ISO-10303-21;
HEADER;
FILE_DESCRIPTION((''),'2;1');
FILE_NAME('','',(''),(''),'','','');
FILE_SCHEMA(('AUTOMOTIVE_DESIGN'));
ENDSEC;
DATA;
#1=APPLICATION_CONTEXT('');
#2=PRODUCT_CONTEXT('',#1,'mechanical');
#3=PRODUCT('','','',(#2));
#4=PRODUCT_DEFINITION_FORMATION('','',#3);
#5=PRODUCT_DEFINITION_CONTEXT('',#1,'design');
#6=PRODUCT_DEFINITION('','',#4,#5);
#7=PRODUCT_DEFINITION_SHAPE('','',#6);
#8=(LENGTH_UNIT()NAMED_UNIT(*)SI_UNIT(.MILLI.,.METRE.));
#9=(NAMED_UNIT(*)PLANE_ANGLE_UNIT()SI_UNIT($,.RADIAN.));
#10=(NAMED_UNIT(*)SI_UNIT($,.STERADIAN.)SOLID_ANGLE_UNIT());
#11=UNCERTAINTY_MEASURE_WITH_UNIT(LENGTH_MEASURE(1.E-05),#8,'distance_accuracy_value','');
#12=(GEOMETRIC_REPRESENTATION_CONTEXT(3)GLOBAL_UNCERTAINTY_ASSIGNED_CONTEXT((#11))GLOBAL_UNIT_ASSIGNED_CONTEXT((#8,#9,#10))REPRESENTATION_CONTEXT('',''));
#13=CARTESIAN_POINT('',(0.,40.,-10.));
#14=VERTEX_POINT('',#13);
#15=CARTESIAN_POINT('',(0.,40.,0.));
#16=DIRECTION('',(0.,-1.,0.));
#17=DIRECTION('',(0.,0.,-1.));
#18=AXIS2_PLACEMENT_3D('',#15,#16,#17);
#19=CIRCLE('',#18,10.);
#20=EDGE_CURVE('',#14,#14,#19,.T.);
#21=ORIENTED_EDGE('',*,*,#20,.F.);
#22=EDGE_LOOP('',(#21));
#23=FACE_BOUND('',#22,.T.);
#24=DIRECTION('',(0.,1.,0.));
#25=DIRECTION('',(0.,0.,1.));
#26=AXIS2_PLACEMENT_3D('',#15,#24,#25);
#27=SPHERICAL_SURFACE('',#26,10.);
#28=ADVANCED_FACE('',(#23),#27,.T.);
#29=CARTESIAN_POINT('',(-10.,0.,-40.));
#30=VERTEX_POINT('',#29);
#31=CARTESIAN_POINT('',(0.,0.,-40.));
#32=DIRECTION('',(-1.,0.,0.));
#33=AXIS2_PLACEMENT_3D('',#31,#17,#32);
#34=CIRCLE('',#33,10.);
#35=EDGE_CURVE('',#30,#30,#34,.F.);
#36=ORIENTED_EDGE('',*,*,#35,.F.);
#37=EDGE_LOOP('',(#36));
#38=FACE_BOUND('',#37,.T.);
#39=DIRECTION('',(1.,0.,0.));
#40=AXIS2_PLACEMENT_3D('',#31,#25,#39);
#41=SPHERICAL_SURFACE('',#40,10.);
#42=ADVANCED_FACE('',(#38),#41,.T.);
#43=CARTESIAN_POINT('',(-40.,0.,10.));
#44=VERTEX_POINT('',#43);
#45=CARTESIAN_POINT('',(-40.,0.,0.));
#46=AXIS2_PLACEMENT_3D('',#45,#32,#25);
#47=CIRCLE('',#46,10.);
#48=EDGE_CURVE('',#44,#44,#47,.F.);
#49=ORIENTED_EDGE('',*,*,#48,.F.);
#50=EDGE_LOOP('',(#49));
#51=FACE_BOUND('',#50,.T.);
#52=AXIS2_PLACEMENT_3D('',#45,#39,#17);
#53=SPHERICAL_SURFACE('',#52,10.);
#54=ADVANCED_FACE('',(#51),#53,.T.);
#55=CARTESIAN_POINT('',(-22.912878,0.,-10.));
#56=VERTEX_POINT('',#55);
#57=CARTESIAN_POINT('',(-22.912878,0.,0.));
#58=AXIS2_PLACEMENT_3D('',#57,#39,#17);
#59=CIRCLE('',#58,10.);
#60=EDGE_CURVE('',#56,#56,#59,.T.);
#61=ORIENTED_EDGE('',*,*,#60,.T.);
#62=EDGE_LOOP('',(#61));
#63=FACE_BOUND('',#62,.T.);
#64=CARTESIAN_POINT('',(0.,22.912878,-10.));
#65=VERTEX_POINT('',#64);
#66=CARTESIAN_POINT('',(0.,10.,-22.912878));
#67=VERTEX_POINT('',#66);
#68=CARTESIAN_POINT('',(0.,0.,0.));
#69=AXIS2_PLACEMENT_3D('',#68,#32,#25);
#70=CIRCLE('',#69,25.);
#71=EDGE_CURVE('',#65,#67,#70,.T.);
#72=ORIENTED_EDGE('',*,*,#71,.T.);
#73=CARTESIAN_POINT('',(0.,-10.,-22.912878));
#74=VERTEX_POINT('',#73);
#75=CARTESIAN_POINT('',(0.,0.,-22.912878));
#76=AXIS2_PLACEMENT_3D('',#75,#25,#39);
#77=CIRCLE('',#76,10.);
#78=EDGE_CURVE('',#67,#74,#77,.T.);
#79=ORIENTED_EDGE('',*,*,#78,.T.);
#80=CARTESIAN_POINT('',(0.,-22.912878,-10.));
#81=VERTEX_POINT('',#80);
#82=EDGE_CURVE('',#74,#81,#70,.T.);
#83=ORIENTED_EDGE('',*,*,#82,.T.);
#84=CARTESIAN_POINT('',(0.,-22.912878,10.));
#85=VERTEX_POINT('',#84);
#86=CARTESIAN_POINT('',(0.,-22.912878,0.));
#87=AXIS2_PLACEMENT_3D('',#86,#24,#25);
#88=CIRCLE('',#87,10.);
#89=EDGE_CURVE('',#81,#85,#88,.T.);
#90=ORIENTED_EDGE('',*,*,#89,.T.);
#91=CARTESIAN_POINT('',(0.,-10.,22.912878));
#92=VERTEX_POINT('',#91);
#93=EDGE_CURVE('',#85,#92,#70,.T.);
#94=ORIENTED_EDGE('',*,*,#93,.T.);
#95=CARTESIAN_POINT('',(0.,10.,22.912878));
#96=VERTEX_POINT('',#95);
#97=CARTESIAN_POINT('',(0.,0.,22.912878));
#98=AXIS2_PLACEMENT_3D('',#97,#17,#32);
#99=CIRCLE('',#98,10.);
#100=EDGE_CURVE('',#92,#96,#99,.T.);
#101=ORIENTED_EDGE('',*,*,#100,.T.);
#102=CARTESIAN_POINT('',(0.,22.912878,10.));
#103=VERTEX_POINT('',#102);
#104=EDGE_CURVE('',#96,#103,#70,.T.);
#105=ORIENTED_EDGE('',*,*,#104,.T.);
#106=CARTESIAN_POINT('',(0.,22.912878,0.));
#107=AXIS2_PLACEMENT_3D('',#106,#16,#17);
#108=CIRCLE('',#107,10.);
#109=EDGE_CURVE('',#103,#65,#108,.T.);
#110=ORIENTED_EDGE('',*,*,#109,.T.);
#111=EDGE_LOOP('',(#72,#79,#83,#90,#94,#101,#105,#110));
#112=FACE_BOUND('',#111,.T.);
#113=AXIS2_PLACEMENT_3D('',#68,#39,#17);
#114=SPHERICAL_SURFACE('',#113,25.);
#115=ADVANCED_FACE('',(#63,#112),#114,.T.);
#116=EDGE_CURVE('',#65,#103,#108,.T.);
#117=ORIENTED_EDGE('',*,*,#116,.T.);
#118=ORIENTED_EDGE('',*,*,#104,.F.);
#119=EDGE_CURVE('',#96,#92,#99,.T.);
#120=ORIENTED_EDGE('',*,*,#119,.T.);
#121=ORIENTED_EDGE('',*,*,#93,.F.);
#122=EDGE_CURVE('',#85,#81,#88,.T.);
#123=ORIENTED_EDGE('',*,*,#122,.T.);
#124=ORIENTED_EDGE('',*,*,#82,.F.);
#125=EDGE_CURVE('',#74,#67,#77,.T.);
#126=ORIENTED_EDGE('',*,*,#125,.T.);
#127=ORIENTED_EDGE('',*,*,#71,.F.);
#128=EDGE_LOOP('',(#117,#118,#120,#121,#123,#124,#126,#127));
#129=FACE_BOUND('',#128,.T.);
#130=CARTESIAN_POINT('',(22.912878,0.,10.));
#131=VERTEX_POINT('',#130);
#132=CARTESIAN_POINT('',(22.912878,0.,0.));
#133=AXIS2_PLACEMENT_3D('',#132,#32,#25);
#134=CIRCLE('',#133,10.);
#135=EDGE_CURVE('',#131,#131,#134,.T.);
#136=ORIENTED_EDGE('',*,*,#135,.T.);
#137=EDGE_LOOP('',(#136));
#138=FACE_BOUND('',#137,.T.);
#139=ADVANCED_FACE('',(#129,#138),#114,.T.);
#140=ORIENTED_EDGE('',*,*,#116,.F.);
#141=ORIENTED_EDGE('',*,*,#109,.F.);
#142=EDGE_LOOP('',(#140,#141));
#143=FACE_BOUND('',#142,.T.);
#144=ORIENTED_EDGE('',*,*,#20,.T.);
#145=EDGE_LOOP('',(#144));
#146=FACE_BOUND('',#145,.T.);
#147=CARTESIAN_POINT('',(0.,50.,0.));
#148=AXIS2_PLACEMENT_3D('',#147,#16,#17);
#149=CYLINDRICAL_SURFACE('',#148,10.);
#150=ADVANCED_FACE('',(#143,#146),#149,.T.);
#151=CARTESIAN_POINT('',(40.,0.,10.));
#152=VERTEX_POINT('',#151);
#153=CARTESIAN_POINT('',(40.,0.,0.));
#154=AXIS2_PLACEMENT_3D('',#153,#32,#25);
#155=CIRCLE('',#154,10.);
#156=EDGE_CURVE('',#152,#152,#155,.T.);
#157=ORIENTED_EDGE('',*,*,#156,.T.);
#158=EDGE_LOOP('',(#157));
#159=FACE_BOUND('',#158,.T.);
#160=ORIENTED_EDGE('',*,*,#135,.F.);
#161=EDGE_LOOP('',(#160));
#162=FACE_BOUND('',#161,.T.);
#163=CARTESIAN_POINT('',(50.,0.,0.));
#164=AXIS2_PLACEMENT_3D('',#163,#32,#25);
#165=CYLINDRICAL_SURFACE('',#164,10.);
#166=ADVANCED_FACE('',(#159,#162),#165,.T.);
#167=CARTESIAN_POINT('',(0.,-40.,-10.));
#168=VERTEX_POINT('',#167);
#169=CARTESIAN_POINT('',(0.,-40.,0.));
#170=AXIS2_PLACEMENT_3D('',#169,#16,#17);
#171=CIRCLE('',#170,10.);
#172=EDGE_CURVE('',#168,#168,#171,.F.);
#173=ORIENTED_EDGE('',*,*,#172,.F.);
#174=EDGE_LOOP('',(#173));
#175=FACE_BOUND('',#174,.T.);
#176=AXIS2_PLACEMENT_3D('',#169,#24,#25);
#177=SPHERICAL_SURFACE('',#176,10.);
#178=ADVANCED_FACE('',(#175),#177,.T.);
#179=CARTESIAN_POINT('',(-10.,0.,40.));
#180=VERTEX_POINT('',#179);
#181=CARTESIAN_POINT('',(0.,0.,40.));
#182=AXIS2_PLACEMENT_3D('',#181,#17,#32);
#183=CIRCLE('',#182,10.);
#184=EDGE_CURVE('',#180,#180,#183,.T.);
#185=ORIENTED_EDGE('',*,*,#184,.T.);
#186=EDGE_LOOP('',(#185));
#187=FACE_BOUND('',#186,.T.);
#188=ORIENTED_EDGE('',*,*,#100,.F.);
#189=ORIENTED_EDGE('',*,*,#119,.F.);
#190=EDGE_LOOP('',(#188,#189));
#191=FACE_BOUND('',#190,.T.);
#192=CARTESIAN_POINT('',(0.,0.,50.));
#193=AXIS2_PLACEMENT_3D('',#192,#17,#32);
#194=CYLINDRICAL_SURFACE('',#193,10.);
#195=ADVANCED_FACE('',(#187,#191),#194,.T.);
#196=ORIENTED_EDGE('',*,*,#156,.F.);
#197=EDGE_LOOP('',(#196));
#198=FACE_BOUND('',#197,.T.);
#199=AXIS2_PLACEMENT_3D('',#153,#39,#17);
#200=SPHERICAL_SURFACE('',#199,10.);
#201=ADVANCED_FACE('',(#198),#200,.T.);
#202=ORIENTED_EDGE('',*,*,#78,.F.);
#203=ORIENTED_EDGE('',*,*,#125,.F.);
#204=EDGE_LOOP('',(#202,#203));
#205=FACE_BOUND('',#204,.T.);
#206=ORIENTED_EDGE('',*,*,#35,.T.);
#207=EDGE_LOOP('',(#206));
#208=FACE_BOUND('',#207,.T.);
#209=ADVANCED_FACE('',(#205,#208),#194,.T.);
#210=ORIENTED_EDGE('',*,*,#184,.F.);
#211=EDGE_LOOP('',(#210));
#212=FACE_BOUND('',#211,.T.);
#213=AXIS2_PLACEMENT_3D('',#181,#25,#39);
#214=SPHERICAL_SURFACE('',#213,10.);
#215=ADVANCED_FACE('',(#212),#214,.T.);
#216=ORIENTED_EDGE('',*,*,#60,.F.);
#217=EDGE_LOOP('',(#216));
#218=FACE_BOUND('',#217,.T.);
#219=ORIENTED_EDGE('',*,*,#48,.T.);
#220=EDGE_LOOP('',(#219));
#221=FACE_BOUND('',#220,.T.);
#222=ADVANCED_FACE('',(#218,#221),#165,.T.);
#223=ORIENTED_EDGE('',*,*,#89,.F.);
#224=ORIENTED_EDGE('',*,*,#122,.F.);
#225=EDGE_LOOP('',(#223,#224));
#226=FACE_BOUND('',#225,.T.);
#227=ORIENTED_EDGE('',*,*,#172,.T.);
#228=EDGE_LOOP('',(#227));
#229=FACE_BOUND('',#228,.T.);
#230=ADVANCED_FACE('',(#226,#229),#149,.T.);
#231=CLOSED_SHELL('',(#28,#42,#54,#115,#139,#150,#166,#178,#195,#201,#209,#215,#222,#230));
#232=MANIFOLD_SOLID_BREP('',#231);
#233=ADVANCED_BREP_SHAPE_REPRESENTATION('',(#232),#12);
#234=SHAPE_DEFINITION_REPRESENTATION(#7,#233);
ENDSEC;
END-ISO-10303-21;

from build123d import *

# Parameters (mm, degrees)
SKETCH1_R           = 25
BOSS_EXTRUDE1_DEPTH = 25
FILLET1_R           = 25
SKETCH2_R           = 10
BOSS_EXTRUDE2_DEPTH = 50
FILLET2_R           = 10
SKETCH3_R           = 10
BOSS_EXTRUDE3_DEPTH = 50
FILLET3_R           = 10
SKETCH4_R           = 10
BOSS_EXTRUDE4_DEPTH = 50
FILLET4_R           = 10


with BuildPart() as part:
    # Sketch1 → Boss-Extrude1 (new, symmetric)
    with BuildSketch(Plane(origin=(0, 0, 0), x_dir=(0, 0, -1), z_dir=(1, 0, 0))):
        Circle(SKETCH1_R)
    extrude(amount=BOSS_EXTRUDE1_DEPTH, both=True)

    # Fillet1
    fillet1_edges = [part.edges().sort_by_distance(p)[0] for p in [
        (-25, 0, 25),
        (25, 0, 25),
    ]]
    fillet(fillet1_edges, radius=FILLET1_R - 0.0001)  # a hair under: the kernel refuses the full size

    # Sketch2 → Boss-Extrude2 (add, symmetric)
    with BuildSketch(Plane(origin=(0, 0, 0), x_dir=(0, 0, -1), z_dir=(1, 0, 0))):
        with Locations(Location((0, 0, 0), (0, 0, 180))):
            Circle(SKETCH2_R)
    extrude(amount=BOSS_EXTRUDE2_DEPTH, both=True)

    # Fillet2
    fillet2_edges = [part.edges().sort_by_distance(p)[0] for p in [
        (50, 0, -10),
        (-50, 0, -10),
    ]]
    fillet(fillet2_edges, radius=FILLET2_R)

    # Sketch3 → Boss-Extrude3 (add, symmetric)
    with BuildSketch(Plane.XY):
        with Locations(Location((0, 0, 0), (0, 0, 90))):
            Circle(SKETCH3_R)
    extrude(amount=BOSS_EXTRUDE3_DEPTH, both=True)

    # Fillet3
    fillet3_edges = [part.edges().sort_by_distance(p)[0] for p in [
        (0, -10, -50),
        (0, -10, 50),
    ]]
    fillet(fillet3_edges, radius=FILLET3_R)

    # Sketch4 → Boss-Extrude4 (add, symmetric)
    with BuildSketch(Plane(origin=(0, 0, 0), x_dir=(1, 0, 0), z_dir=(0, 1, 0))):
        with Locations(Location((0, 0, 0), (0, 0, 270))):
            Circle(SKETCH4_R)
    extrude(amount=BOSS_EXTRUDE4_DEPTH, both=True)

    # Fillet4
    fillet4_edges = [part.edges().sort_by_distance(p)[0] for p in [
        (0, -50, -10),
        (0, 50, -10),
    ]]
    fillet(fillet4_edges, radius=FILLET4_R)


solid = part.part
